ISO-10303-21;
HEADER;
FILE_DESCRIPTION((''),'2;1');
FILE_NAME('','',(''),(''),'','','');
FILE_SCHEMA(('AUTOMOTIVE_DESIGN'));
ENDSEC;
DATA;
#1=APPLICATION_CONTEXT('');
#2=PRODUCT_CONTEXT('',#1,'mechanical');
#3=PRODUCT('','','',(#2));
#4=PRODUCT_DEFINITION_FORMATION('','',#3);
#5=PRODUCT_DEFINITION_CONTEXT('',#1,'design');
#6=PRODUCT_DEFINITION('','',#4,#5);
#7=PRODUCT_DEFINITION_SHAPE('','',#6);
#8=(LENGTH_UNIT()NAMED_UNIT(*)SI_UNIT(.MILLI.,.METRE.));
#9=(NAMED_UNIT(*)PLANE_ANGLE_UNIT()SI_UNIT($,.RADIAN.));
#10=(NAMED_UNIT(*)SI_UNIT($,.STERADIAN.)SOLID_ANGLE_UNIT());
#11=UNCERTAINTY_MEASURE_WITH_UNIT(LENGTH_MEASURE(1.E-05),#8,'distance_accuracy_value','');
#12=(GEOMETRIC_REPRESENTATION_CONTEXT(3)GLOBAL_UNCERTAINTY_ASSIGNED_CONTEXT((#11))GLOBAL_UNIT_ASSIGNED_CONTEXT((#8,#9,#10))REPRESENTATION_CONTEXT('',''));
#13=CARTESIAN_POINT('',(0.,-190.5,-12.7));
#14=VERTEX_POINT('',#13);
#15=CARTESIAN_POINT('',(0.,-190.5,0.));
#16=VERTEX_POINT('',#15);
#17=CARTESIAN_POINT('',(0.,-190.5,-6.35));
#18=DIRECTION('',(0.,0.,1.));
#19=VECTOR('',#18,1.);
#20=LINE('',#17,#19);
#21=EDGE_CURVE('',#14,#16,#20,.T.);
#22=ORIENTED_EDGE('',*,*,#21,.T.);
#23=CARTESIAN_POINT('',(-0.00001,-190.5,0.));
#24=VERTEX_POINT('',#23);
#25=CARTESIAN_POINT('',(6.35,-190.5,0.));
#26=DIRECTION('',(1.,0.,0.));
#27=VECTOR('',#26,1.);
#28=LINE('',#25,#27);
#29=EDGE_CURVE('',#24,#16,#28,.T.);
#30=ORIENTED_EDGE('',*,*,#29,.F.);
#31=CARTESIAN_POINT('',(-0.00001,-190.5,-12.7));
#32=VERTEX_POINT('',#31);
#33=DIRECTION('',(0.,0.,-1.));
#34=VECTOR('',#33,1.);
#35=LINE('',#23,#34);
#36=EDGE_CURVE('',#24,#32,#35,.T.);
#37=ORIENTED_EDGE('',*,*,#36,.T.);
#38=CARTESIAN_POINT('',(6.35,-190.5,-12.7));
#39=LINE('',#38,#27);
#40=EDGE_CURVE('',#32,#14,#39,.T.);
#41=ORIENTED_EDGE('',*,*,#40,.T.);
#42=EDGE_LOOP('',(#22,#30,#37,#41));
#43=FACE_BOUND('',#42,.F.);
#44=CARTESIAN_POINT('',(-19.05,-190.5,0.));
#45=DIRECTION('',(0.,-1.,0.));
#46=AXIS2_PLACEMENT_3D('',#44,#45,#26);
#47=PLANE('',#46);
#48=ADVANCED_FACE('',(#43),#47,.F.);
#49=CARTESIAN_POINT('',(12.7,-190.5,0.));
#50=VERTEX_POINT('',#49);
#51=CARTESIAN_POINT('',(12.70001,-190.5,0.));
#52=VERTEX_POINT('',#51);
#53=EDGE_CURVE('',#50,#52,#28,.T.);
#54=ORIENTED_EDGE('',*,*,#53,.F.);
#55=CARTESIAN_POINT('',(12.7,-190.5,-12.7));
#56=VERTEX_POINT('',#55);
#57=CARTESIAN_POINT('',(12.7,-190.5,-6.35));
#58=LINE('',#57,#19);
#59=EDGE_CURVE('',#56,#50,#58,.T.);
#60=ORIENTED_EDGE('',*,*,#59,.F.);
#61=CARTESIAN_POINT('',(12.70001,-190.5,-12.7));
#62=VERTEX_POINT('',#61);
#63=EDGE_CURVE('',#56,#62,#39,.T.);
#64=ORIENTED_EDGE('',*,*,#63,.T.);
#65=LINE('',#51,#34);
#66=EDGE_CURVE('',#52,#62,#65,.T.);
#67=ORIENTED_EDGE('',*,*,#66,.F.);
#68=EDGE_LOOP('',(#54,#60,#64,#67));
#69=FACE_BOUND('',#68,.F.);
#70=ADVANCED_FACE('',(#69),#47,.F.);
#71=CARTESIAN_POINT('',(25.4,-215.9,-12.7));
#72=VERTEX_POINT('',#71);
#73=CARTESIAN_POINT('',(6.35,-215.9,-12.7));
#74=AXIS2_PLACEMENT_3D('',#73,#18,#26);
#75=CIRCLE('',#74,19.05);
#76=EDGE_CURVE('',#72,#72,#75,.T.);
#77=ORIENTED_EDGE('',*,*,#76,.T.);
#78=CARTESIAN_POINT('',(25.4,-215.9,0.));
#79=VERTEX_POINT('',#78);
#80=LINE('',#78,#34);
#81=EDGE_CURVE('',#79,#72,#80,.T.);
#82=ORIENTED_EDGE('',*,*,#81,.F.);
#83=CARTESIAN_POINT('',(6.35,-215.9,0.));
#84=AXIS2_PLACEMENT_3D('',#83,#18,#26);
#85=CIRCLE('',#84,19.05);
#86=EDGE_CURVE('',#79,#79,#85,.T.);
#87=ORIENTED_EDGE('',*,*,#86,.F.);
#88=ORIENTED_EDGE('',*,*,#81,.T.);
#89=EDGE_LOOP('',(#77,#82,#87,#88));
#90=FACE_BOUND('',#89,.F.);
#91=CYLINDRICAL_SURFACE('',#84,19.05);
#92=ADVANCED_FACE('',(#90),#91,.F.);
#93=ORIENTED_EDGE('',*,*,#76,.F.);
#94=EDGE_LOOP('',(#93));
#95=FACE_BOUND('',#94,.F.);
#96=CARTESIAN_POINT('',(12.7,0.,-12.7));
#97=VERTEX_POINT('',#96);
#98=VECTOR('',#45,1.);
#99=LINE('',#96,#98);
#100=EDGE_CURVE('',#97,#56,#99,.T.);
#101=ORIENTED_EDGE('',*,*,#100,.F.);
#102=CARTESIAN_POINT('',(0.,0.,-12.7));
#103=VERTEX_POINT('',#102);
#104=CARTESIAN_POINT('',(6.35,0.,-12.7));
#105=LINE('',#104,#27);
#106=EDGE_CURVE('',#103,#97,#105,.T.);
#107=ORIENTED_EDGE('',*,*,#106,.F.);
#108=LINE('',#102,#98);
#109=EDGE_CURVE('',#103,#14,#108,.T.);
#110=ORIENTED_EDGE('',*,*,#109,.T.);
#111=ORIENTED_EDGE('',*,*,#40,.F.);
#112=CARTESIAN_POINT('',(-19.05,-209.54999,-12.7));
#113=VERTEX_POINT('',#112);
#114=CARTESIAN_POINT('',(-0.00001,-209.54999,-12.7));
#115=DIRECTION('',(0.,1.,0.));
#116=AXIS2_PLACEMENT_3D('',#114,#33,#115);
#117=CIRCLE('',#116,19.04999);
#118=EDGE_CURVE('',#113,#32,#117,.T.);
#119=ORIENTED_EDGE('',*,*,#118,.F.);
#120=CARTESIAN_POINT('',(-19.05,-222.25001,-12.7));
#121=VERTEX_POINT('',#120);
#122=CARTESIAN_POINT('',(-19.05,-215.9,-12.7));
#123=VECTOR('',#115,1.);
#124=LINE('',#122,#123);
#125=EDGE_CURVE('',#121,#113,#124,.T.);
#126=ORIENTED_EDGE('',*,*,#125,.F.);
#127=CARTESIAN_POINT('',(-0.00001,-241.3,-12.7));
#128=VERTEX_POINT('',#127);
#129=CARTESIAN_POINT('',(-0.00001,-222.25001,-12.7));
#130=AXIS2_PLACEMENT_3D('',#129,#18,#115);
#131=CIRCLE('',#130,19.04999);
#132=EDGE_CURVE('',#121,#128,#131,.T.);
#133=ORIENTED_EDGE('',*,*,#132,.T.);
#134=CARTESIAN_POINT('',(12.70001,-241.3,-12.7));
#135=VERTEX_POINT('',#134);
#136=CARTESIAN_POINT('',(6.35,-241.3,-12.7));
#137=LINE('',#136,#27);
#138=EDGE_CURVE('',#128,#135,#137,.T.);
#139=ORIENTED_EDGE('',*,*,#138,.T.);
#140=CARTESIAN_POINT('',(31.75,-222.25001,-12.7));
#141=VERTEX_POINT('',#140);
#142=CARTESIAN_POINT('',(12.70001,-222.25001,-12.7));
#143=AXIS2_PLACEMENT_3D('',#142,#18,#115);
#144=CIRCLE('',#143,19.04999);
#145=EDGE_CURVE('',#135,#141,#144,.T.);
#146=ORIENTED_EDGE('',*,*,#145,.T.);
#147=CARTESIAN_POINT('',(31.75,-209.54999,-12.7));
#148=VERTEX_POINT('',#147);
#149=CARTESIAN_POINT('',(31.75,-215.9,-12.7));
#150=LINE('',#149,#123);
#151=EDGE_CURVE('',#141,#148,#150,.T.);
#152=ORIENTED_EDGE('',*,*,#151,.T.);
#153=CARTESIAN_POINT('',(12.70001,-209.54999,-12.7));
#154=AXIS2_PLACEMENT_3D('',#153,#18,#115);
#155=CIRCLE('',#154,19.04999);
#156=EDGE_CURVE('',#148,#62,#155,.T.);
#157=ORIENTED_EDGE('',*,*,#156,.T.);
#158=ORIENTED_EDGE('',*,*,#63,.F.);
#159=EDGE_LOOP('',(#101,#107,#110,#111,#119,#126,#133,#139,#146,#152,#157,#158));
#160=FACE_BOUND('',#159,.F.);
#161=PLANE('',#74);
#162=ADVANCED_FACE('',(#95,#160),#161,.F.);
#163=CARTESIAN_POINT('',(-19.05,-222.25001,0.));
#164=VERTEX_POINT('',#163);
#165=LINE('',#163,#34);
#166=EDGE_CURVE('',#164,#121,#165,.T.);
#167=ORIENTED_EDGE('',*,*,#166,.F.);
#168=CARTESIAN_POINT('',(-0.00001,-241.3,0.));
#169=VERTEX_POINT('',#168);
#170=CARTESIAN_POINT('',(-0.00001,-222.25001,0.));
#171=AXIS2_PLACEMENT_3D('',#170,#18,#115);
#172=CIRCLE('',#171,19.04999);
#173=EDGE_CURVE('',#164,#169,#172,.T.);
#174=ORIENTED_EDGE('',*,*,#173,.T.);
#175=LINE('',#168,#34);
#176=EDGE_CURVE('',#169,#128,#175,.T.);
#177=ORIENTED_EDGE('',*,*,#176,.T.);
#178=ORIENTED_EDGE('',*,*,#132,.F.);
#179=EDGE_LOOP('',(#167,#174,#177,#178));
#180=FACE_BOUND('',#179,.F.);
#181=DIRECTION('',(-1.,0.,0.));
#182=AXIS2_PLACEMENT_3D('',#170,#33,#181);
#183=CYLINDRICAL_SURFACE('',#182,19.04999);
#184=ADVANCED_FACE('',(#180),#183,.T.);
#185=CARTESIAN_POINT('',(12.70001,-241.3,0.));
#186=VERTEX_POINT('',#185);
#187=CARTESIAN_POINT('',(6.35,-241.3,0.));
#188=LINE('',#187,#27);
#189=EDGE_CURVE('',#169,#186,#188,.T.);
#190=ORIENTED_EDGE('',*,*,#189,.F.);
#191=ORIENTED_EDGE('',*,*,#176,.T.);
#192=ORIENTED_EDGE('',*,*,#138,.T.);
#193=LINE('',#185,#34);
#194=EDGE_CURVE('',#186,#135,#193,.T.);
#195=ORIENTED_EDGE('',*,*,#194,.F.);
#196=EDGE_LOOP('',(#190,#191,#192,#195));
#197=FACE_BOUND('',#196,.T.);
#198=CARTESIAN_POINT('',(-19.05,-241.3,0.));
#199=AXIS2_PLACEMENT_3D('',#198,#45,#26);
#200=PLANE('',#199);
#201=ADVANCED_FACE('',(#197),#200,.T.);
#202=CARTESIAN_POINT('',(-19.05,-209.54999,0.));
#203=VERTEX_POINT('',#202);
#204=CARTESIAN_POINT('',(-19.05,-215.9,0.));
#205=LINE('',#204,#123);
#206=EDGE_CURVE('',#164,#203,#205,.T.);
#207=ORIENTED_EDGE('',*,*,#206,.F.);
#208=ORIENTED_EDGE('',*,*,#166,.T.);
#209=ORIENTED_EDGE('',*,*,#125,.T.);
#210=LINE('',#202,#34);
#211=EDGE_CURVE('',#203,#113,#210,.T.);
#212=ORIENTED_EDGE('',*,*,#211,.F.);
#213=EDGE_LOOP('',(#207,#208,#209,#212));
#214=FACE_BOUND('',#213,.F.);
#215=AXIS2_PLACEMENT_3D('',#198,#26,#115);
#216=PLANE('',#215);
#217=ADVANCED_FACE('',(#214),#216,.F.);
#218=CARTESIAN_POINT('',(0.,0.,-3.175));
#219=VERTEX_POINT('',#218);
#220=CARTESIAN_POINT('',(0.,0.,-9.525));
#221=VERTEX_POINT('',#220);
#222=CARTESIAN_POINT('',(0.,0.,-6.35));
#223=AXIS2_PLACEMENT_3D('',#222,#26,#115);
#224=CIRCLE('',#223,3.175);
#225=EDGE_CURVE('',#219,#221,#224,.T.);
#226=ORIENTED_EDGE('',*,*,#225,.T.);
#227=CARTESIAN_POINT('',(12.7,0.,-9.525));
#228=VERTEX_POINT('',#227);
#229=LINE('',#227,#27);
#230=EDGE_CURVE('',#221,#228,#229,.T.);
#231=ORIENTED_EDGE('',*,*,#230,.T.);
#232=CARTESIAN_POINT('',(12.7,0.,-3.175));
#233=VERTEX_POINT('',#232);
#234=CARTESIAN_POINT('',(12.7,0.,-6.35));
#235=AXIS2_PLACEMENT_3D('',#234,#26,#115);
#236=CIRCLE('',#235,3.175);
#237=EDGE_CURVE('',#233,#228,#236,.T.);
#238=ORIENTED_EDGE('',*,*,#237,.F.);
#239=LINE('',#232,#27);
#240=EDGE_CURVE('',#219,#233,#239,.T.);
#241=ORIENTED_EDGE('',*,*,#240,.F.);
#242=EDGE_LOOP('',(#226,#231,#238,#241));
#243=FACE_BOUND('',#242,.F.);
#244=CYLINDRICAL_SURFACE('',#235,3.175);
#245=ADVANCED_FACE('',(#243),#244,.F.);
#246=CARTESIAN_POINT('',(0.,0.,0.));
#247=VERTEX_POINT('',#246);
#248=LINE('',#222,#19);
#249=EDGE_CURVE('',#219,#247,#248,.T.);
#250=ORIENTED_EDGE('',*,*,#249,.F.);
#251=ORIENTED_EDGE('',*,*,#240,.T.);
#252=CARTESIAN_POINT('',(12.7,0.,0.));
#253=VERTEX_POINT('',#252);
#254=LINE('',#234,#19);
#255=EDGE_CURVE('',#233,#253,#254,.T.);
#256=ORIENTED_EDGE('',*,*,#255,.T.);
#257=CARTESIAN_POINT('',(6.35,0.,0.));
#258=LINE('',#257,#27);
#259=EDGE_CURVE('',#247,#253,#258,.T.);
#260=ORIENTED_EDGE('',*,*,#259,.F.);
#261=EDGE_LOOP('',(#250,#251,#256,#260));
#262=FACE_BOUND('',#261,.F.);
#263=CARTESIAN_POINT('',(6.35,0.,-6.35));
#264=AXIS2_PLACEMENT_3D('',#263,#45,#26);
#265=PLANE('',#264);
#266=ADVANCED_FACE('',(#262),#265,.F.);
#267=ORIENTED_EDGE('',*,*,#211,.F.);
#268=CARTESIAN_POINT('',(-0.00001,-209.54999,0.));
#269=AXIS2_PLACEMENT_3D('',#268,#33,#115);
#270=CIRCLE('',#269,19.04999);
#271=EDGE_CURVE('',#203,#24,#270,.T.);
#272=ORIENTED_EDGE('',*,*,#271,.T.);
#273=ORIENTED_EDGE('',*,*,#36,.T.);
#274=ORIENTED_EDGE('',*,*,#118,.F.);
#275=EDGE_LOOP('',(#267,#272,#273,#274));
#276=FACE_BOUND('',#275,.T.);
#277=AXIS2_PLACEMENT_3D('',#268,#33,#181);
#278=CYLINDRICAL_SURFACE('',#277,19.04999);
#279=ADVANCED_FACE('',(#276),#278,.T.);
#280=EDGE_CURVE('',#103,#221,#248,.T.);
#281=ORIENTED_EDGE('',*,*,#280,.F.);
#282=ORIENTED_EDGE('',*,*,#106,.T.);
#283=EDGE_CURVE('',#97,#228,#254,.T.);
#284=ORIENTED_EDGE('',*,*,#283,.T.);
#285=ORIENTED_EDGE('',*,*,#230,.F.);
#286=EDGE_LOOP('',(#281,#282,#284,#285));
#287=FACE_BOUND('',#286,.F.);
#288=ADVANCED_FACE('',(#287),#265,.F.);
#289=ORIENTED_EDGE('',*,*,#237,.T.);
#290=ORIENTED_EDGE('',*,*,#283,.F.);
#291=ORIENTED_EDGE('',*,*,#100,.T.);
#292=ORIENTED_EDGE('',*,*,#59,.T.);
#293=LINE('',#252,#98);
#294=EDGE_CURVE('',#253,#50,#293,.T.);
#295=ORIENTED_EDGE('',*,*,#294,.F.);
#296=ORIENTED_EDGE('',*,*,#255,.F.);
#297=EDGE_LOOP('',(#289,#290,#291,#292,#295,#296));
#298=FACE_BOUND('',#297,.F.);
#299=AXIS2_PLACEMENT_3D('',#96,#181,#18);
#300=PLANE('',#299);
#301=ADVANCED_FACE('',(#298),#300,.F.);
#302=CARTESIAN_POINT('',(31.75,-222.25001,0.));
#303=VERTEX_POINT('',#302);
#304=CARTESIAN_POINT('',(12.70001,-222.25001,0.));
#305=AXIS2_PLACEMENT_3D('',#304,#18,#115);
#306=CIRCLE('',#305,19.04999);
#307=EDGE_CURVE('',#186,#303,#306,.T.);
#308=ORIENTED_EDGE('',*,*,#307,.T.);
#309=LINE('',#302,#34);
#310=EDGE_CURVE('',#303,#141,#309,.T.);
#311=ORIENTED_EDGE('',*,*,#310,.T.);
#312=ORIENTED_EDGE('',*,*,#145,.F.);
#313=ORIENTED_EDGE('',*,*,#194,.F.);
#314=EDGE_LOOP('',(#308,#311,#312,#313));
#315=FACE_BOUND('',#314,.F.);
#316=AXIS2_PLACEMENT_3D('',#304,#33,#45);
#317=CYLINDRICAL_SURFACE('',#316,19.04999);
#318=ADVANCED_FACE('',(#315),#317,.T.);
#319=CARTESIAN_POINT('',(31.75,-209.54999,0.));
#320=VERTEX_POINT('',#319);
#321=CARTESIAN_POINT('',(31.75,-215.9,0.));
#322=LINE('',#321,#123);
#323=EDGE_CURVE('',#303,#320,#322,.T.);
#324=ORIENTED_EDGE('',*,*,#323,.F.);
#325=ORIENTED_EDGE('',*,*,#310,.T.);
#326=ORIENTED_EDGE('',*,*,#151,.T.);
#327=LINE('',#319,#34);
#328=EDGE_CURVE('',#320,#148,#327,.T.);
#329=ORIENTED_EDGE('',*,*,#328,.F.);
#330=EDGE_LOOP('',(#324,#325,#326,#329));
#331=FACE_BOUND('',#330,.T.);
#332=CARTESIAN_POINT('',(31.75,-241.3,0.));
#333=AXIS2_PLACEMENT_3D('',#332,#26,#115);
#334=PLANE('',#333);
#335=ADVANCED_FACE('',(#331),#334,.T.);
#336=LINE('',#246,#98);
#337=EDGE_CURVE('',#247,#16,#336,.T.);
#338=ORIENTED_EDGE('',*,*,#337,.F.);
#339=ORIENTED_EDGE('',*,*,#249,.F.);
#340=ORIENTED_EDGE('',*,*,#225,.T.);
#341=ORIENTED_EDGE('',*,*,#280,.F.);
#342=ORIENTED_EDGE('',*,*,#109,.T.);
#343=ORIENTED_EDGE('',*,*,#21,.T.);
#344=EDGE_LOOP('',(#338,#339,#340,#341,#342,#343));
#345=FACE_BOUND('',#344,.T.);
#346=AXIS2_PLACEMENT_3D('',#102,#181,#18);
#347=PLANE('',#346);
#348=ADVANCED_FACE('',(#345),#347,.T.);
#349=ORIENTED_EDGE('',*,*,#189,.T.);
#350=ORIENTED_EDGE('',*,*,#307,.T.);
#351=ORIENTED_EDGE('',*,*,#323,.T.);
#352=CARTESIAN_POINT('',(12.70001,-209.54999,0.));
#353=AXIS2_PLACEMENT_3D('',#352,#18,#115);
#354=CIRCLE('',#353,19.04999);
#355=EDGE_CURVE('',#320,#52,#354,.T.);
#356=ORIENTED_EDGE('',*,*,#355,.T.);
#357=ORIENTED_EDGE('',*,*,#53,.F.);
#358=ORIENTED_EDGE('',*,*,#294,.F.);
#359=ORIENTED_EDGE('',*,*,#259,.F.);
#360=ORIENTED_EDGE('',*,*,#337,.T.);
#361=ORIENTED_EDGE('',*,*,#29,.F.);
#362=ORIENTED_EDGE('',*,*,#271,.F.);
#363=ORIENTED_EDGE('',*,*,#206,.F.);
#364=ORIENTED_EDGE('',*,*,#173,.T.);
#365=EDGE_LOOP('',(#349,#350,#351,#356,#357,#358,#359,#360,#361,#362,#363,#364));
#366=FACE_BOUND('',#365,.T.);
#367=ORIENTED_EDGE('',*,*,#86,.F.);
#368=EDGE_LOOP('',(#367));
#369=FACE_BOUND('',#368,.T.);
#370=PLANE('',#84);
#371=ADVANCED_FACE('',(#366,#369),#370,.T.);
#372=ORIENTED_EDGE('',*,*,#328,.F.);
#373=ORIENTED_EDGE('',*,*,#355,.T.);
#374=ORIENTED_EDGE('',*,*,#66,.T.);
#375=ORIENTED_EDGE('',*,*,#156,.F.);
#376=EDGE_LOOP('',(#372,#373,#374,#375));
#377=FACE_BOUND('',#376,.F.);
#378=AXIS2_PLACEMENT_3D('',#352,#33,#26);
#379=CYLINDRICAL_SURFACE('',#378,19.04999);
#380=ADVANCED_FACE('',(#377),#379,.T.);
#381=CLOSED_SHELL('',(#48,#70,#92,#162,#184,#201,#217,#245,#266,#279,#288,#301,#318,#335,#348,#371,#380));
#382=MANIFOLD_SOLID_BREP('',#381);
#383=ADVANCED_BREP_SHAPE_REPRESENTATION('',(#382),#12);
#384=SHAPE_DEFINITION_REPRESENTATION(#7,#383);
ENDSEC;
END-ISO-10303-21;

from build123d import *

# Parameters (mm, degrees)
F0_W     = 12.7
F0_H     = 12.7
F1_DEPTH = 190.5
F2_W     = 50.8
F2_H     = 50.8
F3_DEPTH = 12.7
F4_R     = 19.05
F5_DEPTH = 12.701
F6_R     = 19.04999
F7_R     = 3.175
F8_DEPTH = 31.751


# Not quite as in the source:
# - a fillet or chamfer is up to 0.001 mm smaller than in the source, because OpenCascade refuses the exact size


with BuildPart() as f1:
    # F0 (on Front) → F1 (new body)
    with BuildSketch(Plane.XZ):
        with Locations((6.35, -6.35)):
            Rectangle(F0_W, F0_H)
    extrude(amount=F1_DEPTH)

    # F2 (on face) → F3 (join)
    with BuildSketch(Plane.XY):
        with Locations((6.35, -215.9)):
            Rectangle(F2_W, F2_H)
    extrude(amount=-F3_DEPTH)

    # F4 (on face) → F5 (cut, through all)
    with BuildSketch(Plane.XY):
        with Locations((6.35, -215.9)):
            Circle(F4_R)
    extrude(amount=-F5_DEPTH, mode=Mode.SUBTRACT)

    # F6 (radius 19.05 in the source; OpenCascade refuses exactly that, so slightly less here)
    f6_edges = [f1.edges().sort_by_distance(p)[0] for p in [
        (31.75, -241.3, -6.35),
        (31.75, -190.5, -6.35),
        (-19.05, -241.3, -6.35),
        (-19.05, -190.5, -6.35),
    ]]
    fillet(f6_edges, radius=F6_R)

    # F7 (on face) → F8 (cut, through all)
    with BuildSketch(Plane.YZ.offset(12.7)):
        with Locations((0, -6.35)):
            Circle(F7_R)
    extrude(amount=-F8_DEPTH, mode=Mode.SUBTRACT)


solid = f1.part
